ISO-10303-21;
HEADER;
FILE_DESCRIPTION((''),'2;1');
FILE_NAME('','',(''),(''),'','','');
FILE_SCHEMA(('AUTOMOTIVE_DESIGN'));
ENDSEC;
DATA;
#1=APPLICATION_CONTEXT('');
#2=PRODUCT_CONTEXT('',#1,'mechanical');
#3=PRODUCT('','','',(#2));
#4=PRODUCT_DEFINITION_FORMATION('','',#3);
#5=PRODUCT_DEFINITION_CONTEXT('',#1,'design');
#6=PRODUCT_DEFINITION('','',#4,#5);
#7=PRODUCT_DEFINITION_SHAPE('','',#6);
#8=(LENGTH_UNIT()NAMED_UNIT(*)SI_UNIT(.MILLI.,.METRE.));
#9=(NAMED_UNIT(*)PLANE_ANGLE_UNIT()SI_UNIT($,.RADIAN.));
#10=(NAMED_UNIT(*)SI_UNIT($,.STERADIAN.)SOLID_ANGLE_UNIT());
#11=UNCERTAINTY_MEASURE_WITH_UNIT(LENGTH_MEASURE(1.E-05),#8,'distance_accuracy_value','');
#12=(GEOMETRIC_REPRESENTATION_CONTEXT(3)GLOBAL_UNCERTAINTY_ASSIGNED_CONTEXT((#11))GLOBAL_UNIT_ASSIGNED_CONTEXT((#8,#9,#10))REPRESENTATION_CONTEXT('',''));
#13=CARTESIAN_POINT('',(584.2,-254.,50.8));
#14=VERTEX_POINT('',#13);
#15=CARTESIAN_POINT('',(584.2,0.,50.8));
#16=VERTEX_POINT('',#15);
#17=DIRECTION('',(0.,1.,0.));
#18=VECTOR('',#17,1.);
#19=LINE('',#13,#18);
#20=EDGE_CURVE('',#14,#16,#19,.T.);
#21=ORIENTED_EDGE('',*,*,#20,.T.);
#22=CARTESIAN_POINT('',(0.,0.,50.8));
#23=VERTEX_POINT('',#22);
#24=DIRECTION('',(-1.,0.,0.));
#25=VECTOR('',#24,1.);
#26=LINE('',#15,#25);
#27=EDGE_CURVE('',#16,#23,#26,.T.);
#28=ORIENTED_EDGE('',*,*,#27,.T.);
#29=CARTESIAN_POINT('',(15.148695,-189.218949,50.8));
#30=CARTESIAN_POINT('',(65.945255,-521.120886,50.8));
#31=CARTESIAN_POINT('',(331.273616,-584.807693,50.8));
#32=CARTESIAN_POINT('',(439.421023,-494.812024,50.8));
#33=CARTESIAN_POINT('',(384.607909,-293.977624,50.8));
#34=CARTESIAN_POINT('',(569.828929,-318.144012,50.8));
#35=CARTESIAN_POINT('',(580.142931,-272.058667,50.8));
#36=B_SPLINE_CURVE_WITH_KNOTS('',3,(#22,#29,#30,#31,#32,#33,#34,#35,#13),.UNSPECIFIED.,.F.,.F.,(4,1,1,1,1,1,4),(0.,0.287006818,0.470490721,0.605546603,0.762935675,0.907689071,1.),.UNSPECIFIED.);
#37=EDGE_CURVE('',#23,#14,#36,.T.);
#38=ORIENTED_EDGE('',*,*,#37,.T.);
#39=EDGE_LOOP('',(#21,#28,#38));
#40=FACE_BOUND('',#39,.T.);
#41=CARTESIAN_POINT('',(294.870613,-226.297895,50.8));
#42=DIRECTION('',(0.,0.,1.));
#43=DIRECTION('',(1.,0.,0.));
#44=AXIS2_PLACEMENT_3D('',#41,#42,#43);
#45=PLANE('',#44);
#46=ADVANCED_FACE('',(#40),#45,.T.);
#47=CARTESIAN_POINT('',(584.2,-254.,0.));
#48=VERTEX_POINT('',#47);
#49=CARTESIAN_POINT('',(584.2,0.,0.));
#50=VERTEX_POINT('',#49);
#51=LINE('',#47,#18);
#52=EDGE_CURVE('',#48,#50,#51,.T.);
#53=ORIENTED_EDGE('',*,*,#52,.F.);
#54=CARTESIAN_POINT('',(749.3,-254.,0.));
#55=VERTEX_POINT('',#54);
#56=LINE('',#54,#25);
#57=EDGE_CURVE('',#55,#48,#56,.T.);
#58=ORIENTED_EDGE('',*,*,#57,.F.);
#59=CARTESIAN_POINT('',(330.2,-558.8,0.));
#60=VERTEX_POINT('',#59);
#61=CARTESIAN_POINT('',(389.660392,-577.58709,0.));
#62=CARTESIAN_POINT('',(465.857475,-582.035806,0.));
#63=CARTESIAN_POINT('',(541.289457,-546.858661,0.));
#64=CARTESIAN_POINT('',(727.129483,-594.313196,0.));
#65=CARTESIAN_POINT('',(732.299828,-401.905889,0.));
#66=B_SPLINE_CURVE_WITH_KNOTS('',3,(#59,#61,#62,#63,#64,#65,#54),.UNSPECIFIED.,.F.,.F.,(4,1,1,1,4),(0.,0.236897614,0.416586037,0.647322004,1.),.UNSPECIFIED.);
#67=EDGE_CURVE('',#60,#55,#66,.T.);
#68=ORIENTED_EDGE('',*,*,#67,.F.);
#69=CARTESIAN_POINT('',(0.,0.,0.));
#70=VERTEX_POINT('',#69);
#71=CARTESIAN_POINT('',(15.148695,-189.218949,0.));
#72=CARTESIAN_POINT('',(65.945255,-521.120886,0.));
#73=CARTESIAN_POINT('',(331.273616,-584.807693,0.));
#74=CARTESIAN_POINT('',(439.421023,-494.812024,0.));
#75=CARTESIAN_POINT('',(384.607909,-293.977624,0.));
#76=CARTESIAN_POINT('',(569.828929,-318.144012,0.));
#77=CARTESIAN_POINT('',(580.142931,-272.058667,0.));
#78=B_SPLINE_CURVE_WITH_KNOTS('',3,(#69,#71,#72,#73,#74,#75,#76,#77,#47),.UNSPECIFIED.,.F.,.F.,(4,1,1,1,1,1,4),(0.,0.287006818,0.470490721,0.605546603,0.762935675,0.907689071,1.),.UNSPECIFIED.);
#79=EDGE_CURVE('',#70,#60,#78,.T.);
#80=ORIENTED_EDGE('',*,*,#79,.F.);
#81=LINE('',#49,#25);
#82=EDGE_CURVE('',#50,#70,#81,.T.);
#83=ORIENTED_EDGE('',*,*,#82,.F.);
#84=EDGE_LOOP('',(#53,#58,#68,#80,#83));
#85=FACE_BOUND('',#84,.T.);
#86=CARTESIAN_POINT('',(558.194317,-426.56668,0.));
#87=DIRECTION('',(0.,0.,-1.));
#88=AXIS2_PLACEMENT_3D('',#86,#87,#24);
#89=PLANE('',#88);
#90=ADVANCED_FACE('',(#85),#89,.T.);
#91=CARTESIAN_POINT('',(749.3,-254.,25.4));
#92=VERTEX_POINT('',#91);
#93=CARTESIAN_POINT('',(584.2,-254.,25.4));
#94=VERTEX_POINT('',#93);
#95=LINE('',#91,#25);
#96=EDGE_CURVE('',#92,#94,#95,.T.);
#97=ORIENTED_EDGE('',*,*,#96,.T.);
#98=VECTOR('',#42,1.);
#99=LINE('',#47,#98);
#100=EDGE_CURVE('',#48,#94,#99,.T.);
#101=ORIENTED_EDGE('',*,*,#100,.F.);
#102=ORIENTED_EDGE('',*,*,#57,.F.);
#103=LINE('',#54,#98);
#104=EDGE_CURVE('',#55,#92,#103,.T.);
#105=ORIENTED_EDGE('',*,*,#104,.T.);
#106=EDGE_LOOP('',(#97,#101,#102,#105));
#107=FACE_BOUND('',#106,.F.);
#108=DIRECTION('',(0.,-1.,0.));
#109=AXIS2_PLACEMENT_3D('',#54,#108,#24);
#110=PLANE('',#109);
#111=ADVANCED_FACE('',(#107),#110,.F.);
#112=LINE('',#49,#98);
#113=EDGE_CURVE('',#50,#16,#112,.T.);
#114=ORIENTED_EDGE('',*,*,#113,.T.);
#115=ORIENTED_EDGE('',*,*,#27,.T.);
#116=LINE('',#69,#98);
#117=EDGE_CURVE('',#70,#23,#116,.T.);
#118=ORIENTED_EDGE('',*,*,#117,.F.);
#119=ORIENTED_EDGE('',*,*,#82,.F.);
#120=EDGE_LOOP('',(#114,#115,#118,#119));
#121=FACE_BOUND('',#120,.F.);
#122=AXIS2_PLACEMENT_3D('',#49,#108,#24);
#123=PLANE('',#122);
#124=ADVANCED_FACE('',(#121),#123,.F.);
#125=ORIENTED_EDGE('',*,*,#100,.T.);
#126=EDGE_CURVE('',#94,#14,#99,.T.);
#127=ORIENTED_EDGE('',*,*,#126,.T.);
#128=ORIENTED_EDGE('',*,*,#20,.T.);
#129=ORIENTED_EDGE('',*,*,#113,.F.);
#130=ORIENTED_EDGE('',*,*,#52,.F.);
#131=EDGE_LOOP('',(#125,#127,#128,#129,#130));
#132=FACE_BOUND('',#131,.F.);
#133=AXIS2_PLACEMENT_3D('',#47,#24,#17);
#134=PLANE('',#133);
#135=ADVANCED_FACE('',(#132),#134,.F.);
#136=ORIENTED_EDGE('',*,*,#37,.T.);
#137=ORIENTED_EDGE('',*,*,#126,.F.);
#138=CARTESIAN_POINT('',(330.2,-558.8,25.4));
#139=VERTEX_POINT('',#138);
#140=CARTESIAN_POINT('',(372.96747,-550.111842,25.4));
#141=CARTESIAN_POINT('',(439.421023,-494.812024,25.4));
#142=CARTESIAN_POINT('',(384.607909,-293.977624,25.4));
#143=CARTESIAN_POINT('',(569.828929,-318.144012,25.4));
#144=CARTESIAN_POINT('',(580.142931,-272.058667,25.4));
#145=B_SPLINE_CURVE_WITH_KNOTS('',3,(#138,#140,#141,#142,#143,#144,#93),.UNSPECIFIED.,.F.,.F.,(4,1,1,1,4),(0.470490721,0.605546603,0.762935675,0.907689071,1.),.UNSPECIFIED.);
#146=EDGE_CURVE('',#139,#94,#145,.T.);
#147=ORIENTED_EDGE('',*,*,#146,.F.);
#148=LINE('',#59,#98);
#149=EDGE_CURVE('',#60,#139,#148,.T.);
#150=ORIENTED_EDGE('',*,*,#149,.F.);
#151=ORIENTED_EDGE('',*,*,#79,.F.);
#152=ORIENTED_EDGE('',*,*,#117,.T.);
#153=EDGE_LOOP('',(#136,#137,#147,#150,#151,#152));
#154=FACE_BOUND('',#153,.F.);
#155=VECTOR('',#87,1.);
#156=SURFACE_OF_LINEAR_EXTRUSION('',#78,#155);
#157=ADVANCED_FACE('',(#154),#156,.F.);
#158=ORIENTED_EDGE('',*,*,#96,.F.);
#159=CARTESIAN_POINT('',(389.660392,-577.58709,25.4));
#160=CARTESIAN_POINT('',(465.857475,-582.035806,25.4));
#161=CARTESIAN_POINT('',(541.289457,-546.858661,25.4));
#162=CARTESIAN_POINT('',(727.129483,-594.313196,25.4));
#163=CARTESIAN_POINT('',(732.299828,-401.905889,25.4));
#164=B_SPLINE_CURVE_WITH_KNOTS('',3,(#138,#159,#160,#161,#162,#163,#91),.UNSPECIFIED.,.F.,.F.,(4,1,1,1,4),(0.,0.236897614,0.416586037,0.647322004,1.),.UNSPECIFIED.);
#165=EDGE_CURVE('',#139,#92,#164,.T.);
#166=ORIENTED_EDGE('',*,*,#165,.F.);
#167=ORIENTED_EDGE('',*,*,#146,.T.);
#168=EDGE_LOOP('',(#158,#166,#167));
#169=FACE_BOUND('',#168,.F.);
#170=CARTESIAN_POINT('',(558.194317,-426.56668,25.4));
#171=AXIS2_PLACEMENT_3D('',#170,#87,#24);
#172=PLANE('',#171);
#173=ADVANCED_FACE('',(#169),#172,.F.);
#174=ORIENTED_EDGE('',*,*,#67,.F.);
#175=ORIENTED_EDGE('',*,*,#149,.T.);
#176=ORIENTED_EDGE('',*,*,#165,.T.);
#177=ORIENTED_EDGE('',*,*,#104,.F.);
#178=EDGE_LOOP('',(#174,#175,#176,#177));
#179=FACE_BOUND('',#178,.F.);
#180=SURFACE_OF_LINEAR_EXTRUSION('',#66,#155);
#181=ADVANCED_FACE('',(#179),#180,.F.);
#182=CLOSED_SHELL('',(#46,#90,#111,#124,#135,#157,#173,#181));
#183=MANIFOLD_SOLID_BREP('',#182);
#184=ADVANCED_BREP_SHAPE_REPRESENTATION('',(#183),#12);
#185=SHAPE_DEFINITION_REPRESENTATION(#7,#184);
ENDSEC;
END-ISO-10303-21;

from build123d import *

# Parameters (mm, degrees)
F2_DEPTH = 50.8
F3_DEPTH = 25.4


# Not quite as in the source:
# - the dataset's text gives a spline's control points without its knots; the knots are read off the source's solid


with BuildPart() as f2:
    # F0 (on Top) → F2 (new body)
    with BuildSketch(Plane.XY):
        with BuildLine():
            Line((584.2, 0), (0, 0))
            add(Edge.make_bspline(
                [(0, 0), (15.1486947055, -189.218948528), (65.9452547031, -521.1208855176), (331.2736157203, -584.8076926646), (439.4210233355, -494.812023687), (384.6079093416, -293.977624041), (569.828929238, -318.1440119701), (580.1429311177, -272.0586668), (584.2, -254)],
                knots=[0, 0, 0, 0, 0.2870068182, 0.4704907214, 0.6055466033, 0.7629356749, 0.9076890707, 1, 1, 1, 1], degree=3))
            Line((584.2, -254), (584.2, 0))
        make_face()
    extrude(amount=F2_DEPTH)

    # F1 (on Top) → F3 (join)
    with BuildSketch(Plane.XY):
        with BuildLine():
            add(Edge.make_bspline(
                [(330.2, -558.8), (372.9674701378, -550.1118418504), (439.4210233355, -494.812023687), (384.6079093416, -293.977624041), (569.828929238, -318.1440119701), (580.1429311177, -272.0586668), (584.2, -254)],
                knots=[0.4704907214, 0.4704907214, 0.4704907214, 0.4704907214, 0.6055466033, 0.7629356749, 0.9076890707, 1, 1, 1, 1], degree=3))
            add(Edge.make_bspline(
                [(330.2, -558.8), (389.6603919437, -577.5870896762), (465.8574745229, -582.035806053), (541.2894567383, -546.8586607902), (727.1294826657, -594.3131958041), (732.2998279498, -401.9058890127), (749.3, -254)],
                knots=[0, 0, 0, 0, 0.2368976142, 0.4165860366, 0.6473220038, 1, 1, 1, 1], degree=3))
            Line((749.3, -254), (584.2, -254))
        make_face()
    extrude(amount=F3_DEPTH)


solid = f2.part
